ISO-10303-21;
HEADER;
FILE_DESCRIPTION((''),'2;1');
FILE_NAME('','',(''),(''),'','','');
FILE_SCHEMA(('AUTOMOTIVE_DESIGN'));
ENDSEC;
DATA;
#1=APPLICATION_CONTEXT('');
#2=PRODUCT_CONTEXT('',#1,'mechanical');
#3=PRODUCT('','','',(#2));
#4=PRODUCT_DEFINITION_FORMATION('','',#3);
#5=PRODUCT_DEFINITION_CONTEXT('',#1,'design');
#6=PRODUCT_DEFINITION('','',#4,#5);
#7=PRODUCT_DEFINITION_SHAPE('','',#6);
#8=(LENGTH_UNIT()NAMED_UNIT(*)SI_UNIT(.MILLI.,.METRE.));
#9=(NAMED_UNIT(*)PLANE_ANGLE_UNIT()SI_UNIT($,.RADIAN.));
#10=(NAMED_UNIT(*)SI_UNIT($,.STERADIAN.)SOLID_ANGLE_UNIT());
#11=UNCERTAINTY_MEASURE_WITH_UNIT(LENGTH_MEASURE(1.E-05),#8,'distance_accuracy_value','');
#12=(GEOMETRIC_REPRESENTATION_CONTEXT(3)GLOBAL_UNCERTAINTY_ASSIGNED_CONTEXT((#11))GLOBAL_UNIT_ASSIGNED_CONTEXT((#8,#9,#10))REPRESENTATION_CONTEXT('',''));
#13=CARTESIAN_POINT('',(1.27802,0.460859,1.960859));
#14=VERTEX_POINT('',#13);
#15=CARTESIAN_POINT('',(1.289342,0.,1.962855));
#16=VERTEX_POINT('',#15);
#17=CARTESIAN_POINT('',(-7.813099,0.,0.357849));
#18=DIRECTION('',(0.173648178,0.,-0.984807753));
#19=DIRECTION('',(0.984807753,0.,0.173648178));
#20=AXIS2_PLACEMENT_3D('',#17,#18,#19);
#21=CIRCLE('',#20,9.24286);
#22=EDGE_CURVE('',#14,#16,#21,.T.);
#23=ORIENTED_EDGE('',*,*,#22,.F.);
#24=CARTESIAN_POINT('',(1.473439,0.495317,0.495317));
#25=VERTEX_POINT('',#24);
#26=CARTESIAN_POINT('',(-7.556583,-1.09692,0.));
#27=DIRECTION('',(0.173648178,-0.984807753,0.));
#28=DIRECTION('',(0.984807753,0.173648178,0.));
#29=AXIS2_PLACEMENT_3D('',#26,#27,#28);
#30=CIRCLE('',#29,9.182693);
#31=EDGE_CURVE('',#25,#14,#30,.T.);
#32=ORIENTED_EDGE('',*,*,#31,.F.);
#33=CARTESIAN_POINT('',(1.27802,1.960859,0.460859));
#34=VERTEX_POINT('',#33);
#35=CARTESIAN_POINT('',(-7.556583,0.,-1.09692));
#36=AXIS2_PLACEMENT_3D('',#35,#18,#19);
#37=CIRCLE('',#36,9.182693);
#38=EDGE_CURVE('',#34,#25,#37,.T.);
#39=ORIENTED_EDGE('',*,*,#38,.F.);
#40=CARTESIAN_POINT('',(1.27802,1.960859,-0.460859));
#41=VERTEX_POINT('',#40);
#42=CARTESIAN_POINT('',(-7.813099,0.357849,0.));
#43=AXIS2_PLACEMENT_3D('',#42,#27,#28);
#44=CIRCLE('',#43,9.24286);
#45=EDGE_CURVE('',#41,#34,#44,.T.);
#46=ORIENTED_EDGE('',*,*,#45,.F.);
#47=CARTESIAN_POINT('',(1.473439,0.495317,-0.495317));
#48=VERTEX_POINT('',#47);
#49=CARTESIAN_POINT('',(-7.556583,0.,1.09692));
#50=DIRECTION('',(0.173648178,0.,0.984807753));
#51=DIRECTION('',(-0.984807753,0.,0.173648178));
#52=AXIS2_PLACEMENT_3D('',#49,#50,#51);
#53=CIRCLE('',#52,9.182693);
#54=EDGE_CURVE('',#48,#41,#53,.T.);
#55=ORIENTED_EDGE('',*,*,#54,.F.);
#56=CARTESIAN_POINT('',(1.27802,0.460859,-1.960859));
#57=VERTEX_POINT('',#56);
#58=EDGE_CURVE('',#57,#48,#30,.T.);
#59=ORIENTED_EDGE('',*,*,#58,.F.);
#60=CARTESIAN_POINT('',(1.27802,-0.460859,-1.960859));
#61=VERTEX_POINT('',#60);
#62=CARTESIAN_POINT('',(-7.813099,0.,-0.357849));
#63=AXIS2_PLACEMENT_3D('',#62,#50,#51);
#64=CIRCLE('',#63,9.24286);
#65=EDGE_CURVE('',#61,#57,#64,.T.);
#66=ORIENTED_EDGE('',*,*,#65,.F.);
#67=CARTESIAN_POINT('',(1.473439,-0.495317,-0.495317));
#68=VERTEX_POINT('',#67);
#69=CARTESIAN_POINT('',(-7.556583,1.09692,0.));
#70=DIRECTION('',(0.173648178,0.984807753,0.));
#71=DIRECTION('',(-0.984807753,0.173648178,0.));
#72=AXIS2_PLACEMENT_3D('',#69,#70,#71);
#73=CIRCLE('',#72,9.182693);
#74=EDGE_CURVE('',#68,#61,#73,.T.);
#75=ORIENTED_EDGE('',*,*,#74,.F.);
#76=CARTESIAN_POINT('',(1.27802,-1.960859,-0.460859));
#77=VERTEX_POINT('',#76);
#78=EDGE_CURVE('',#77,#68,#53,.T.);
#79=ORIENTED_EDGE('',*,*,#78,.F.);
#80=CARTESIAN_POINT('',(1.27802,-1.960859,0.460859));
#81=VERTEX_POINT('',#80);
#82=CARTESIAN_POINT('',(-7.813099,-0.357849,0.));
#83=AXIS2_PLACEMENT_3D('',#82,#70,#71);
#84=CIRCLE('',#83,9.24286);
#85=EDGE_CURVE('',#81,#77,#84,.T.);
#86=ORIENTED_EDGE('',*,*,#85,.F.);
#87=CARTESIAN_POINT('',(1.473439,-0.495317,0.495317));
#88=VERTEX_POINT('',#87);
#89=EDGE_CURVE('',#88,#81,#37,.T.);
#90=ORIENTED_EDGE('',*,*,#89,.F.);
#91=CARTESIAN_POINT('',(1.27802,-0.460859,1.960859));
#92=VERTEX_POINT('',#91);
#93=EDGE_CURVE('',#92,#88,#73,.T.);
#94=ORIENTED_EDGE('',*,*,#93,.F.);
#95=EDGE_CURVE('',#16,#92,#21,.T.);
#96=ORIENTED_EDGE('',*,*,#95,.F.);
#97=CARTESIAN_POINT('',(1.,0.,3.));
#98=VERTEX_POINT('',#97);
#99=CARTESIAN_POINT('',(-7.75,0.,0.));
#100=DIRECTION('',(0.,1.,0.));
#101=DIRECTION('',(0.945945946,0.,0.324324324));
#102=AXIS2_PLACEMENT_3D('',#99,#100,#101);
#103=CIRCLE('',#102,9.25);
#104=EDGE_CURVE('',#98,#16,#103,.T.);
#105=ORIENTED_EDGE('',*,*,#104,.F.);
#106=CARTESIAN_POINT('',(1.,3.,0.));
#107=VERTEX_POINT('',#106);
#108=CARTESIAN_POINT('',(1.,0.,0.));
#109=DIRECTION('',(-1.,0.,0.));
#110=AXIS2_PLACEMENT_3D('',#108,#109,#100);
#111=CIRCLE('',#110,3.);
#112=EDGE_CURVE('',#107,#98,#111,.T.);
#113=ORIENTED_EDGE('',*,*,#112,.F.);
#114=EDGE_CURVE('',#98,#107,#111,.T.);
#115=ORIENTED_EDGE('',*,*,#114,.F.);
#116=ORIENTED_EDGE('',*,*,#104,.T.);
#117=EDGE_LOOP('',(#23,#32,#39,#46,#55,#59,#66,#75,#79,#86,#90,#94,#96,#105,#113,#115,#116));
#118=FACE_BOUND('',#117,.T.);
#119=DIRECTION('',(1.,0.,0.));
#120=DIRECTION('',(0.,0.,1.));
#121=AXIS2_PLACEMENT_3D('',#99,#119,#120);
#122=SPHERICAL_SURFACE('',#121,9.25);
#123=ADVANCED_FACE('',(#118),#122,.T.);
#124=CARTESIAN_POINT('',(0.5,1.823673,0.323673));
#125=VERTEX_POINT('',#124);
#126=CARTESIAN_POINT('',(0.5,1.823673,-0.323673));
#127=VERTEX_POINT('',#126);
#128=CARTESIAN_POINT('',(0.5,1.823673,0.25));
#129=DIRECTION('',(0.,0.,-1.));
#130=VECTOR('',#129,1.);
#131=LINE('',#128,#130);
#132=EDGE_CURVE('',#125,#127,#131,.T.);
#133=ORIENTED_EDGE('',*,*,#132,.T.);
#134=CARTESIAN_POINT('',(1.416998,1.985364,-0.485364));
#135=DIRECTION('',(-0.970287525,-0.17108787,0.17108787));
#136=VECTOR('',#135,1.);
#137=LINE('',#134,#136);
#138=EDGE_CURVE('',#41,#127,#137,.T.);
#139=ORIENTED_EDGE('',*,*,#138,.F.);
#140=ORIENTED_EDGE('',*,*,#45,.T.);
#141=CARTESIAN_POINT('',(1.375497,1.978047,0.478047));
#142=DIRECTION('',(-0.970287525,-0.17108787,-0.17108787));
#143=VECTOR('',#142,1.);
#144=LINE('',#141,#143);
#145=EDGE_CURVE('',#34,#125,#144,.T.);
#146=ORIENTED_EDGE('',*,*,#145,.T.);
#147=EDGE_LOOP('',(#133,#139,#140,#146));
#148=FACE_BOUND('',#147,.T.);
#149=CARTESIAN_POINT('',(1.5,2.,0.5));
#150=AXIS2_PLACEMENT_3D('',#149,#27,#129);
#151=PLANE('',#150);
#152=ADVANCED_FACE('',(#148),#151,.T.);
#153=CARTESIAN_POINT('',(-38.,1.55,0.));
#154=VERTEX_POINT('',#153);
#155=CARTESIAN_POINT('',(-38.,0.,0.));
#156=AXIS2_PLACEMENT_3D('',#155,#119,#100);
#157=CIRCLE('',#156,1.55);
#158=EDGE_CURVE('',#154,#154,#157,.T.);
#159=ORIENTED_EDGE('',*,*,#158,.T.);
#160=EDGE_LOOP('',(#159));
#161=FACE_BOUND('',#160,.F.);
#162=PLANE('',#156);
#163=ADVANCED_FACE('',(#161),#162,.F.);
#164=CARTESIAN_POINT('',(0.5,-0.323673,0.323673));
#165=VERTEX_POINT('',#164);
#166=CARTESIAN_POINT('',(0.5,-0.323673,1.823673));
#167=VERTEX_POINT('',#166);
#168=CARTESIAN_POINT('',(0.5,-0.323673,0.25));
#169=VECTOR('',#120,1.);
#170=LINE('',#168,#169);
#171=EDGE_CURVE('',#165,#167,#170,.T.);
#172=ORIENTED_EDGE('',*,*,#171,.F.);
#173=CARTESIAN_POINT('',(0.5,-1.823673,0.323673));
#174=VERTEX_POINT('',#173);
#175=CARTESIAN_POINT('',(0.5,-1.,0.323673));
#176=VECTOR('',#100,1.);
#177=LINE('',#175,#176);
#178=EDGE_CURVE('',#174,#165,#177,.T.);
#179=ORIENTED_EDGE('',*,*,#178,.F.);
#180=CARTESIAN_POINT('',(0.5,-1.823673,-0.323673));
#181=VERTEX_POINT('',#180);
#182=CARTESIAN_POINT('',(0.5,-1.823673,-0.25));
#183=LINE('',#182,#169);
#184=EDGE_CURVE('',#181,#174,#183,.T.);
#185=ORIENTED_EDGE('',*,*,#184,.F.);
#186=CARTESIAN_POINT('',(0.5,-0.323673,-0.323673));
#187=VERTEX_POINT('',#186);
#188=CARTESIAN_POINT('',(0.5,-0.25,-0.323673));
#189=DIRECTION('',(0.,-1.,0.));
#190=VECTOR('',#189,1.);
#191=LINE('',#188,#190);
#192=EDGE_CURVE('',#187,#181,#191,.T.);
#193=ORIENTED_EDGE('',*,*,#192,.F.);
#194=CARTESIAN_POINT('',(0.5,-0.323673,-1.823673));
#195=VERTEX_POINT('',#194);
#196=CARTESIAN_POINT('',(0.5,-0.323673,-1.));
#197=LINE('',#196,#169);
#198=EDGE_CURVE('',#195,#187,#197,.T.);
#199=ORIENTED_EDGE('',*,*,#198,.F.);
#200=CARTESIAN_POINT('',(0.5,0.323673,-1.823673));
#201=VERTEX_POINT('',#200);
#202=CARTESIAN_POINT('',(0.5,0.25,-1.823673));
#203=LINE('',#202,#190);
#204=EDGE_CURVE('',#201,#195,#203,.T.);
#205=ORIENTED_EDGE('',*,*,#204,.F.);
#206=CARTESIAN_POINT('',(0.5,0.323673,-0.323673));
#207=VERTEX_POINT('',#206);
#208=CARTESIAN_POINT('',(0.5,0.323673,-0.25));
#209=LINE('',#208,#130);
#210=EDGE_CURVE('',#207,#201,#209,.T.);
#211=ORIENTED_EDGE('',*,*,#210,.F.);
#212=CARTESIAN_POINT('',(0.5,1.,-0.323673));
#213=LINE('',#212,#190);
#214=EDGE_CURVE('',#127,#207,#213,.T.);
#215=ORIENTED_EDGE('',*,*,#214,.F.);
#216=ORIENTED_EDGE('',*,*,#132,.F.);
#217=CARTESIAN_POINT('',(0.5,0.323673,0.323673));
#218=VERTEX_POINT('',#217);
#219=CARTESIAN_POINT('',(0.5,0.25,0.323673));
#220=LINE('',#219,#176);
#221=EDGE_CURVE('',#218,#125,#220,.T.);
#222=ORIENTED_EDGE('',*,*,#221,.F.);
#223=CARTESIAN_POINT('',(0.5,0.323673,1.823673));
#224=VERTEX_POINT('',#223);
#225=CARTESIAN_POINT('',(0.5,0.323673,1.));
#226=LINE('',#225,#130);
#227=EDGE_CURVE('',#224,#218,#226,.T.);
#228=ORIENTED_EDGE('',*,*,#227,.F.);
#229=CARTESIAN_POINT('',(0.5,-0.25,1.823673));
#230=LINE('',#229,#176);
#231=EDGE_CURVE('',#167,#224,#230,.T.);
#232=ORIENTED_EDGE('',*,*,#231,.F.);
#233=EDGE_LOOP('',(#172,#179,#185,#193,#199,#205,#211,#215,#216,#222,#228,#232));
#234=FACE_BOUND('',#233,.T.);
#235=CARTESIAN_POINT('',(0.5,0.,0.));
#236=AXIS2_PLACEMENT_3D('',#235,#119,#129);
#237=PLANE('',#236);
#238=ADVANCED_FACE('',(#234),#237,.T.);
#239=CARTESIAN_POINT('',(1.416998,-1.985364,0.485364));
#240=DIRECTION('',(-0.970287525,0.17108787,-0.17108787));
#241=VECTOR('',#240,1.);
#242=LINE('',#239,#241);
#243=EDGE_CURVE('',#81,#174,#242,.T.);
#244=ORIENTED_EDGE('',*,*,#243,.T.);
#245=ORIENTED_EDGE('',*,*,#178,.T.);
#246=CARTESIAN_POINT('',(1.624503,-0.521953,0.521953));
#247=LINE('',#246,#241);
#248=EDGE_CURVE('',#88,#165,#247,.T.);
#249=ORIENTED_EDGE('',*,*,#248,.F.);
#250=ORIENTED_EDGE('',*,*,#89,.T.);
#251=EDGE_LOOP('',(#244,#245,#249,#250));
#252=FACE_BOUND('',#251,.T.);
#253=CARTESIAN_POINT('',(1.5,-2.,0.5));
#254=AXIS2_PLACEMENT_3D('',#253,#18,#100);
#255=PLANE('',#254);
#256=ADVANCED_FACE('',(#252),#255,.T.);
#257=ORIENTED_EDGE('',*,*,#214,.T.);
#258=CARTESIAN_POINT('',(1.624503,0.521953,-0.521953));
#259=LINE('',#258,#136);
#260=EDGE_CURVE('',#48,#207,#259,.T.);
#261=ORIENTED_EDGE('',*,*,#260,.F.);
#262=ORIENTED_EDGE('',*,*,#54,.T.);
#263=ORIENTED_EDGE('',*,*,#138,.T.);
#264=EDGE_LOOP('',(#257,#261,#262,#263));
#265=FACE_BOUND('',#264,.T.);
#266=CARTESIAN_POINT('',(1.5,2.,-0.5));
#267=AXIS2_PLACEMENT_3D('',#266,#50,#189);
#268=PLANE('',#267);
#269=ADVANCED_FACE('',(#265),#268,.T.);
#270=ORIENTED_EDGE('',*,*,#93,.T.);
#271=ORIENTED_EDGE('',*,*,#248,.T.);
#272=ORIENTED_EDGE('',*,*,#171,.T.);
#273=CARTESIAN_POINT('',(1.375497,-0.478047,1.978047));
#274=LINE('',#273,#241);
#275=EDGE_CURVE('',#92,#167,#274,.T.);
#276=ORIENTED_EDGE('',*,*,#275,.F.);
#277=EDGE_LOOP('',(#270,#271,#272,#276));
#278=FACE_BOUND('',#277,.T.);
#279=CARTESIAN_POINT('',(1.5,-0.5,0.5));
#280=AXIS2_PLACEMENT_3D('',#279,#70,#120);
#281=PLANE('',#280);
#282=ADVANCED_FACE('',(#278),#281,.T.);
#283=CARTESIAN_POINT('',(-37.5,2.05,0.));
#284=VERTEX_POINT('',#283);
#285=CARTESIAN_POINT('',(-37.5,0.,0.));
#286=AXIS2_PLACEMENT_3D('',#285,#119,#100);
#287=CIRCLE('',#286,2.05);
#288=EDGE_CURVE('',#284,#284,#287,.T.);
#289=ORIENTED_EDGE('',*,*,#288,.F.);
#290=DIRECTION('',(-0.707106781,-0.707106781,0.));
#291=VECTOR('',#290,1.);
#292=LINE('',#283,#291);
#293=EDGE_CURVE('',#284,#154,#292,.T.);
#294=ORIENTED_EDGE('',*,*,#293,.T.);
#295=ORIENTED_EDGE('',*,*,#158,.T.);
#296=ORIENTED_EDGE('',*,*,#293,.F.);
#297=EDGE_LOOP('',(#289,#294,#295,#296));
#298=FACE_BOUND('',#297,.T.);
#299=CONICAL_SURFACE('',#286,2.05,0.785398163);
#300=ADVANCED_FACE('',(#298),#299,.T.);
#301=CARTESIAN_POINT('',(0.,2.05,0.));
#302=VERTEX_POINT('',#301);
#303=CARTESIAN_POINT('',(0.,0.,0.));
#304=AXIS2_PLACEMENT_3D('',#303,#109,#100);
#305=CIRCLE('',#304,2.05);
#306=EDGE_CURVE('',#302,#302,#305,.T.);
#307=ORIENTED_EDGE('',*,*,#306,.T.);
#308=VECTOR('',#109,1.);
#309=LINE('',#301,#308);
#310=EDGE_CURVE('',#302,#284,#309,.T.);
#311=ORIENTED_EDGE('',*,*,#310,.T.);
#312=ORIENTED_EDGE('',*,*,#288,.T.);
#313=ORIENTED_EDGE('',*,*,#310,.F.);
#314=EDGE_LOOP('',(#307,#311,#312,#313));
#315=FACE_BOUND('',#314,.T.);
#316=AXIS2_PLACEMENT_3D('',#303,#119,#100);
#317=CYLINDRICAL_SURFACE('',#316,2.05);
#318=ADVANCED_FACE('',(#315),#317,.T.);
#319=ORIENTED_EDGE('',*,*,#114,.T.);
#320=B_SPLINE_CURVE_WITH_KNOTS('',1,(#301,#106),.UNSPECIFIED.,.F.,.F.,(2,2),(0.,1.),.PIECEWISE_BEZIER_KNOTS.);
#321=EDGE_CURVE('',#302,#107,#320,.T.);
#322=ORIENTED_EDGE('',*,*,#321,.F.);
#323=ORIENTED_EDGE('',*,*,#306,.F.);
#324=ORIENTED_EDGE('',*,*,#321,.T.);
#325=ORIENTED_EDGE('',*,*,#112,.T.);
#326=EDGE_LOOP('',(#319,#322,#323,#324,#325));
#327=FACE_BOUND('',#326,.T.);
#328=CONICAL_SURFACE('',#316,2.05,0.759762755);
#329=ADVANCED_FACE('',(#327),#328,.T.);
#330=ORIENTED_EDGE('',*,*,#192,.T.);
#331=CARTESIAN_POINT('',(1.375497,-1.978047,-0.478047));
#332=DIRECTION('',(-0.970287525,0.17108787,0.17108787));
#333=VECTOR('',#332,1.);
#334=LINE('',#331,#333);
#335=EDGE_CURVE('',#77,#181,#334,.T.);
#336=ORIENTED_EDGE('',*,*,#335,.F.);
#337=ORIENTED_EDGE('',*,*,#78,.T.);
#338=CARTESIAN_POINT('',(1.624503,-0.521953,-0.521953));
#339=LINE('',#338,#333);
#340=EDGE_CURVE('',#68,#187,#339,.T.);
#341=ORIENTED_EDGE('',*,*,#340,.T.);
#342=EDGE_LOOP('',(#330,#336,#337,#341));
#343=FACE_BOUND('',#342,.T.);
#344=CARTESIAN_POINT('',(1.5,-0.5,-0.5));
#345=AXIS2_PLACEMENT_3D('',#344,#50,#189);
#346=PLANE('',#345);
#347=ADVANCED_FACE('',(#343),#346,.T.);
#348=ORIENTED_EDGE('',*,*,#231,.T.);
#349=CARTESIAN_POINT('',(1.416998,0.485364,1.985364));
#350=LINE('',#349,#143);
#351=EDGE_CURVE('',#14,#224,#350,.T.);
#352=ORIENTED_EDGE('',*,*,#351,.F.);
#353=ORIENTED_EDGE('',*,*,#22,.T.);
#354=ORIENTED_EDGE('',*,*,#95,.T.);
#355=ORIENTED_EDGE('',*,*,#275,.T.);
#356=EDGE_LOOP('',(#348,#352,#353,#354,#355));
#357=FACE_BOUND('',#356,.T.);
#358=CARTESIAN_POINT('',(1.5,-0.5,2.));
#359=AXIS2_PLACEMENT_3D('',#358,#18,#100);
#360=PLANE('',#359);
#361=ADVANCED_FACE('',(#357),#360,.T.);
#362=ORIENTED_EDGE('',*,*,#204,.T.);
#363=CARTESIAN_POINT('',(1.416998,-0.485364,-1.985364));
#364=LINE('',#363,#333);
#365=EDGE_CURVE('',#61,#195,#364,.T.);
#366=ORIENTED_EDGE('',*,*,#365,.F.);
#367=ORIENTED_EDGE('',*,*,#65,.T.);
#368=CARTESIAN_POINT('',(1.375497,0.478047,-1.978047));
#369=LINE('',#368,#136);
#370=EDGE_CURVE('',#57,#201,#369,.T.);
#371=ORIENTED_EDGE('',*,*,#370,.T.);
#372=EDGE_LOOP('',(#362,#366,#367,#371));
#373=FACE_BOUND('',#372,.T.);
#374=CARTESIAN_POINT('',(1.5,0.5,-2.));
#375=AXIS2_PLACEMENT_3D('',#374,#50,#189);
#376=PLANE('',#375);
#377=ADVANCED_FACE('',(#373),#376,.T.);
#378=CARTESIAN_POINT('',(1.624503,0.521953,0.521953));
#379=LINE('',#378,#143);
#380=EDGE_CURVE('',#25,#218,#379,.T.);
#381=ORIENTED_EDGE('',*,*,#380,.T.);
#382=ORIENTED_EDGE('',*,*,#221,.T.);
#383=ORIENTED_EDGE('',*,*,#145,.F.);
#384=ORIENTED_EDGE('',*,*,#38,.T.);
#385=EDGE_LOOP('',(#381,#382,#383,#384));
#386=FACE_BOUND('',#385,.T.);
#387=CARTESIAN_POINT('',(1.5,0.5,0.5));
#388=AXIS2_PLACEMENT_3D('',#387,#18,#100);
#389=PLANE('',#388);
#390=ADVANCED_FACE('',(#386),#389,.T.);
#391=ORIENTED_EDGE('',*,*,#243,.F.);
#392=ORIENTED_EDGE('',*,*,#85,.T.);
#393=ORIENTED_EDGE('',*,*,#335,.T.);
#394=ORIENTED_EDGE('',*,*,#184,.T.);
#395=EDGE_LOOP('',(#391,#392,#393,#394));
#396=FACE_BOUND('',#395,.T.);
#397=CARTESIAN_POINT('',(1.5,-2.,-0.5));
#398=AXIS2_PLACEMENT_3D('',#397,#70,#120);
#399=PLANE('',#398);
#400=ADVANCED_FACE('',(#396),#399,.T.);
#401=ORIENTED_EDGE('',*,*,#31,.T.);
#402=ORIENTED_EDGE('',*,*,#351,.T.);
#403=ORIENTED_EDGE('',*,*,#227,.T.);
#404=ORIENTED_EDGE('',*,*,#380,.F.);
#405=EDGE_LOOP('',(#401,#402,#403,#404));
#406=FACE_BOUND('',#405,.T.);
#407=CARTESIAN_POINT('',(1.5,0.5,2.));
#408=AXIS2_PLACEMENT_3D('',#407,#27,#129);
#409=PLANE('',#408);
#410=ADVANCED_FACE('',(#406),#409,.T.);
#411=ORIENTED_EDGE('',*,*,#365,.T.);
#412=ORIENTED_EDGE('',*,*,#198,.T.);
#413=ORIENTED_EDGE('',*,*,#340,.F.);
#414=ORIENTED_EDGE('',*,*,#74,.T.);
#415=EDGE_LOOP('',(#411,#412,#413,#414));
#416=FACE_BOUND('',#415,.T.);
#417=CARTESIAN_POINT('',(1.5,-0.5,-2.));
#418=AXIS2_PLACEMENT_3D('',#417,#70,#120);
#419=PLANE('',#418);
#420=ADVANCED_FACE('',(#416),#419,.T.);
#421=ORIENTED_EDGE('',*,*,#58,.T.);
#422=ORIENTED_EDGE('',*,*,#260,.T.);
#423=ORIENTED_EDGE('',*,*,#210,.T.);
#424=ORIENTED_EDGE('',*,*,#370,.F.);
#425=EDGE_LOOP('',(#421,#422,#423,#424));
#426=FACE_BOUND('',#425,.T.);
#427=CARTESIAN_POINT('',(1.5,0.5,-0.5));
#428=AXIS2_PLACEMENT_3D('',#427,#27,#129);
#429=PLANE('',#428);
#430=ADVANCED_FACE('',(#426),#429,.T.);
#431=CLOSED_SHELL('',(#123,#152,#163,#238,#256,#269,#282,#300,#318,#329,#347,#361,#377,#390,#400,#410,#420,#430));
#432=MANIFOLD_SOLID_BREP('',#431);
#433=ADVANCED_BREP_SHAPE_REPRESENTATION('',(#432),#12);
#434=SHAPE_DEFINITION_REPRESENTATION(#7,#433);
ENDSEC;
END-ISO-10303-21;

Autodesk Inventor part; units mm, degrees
ref_plane "YZ Plane" through (0, 0, 0) normal (1, 0, 0) x (0, 1, 0)
ref_plane "XZ Plane" through (0, 0, 0) normal (0, 1, 0) x (-1, 0, 0)
sketch "Sketch1" plane through (0, 0, 0) normal (1, 0, 0) x (0, 1, 0)
  circle A0 centre (0, 0) radius 2.05
  dimension "d0" = 4.1
extrude "Extrusion1" add sketch "Sketch1" against normal blind 38
ref_plane "Work Plane1" through (1, 0, 0) normal (1, 0, 0) x (0, 0, -1)
sketch "Sketch2" plane through (1, 0, 0) normal (1, 0, 0) x (0, 0, -1)
  circle A0 centre (0, 0) radius 3
  dimension "d4" = 6
loft "Loft1" add profiles "Sketch2" section 1 edges at (0, -2.05, 0)
sketch "Sketch3" plane through (0, 0, 0) normal (0, 1, 0) x (-1, 0, 0)
  line L0 (-1, -3) -> (-1, 3) projected
  line L1 (-1, 3) -> (-1, 0)
  line L2 (-1, 0) -> (-1.5, 0)
  arc A0 (-1, 3) -> (-1.5, 0) centre (7.75, 0) ccw
  point P0 (0, 0)
  dimension "d9" = 0.5
revolve "Revolution1" add sketch "Sketch3" angle 360 about axis through (1, 0, 0) along (1, 0, 0)
ref_plane "Work Plane2" through (1.5, 0, 0) normal (1, 0, 0) x (0, 0, -1)
sketch "Sketch4" plane through (1.5, 0, 0) normal (1, 0, 0) x (0, 0, -1)
  line L0 (2, 0.5) -> (2, -0.5)
  line L1 (-2, -0.5) -> (-2, 0.5)
  line L2 (-0.5, 2) -> (0.5, 2)
  line L3 (0.5, -2) -> (-0.5, -2)
  line L4 (2, -0.5) -> (0.5, -0.5)
  line L5 (-0.5, -0.5) -> (-2, -0.5)
  line L6 (-0.5, -2) -> (-0.5, -0.5)
  line L7 (-0.5, 0.5) -> (-0.5, 2)
  line L8 (-2, 0.5) -> (-0.5, 0.5)
  line L9 (0.5, 0.5) -> (2, 0.5)
  line L10 (0.5, 2) -> (0.5, 0.5)
  line L11 (0.5, -0.5) -> (0.5, -2)
  dimension "d12" = 4
  dimension "d13" = 1
  dimension "d14" = 1
  dimension "d15" = 4
extrude "Extrusion2" cut sketch "Sketch4" against normal blind 1 draft -10
chamfer "Chamfer1" distance 0.5 angle 45 1 edges at (-38, -2.05, 0)
thread "Thread1" size "M4.5x0.75" class "6g" standard "ANSI Metric M Profile" length 15
properties part number "Parafuso do Braço"
